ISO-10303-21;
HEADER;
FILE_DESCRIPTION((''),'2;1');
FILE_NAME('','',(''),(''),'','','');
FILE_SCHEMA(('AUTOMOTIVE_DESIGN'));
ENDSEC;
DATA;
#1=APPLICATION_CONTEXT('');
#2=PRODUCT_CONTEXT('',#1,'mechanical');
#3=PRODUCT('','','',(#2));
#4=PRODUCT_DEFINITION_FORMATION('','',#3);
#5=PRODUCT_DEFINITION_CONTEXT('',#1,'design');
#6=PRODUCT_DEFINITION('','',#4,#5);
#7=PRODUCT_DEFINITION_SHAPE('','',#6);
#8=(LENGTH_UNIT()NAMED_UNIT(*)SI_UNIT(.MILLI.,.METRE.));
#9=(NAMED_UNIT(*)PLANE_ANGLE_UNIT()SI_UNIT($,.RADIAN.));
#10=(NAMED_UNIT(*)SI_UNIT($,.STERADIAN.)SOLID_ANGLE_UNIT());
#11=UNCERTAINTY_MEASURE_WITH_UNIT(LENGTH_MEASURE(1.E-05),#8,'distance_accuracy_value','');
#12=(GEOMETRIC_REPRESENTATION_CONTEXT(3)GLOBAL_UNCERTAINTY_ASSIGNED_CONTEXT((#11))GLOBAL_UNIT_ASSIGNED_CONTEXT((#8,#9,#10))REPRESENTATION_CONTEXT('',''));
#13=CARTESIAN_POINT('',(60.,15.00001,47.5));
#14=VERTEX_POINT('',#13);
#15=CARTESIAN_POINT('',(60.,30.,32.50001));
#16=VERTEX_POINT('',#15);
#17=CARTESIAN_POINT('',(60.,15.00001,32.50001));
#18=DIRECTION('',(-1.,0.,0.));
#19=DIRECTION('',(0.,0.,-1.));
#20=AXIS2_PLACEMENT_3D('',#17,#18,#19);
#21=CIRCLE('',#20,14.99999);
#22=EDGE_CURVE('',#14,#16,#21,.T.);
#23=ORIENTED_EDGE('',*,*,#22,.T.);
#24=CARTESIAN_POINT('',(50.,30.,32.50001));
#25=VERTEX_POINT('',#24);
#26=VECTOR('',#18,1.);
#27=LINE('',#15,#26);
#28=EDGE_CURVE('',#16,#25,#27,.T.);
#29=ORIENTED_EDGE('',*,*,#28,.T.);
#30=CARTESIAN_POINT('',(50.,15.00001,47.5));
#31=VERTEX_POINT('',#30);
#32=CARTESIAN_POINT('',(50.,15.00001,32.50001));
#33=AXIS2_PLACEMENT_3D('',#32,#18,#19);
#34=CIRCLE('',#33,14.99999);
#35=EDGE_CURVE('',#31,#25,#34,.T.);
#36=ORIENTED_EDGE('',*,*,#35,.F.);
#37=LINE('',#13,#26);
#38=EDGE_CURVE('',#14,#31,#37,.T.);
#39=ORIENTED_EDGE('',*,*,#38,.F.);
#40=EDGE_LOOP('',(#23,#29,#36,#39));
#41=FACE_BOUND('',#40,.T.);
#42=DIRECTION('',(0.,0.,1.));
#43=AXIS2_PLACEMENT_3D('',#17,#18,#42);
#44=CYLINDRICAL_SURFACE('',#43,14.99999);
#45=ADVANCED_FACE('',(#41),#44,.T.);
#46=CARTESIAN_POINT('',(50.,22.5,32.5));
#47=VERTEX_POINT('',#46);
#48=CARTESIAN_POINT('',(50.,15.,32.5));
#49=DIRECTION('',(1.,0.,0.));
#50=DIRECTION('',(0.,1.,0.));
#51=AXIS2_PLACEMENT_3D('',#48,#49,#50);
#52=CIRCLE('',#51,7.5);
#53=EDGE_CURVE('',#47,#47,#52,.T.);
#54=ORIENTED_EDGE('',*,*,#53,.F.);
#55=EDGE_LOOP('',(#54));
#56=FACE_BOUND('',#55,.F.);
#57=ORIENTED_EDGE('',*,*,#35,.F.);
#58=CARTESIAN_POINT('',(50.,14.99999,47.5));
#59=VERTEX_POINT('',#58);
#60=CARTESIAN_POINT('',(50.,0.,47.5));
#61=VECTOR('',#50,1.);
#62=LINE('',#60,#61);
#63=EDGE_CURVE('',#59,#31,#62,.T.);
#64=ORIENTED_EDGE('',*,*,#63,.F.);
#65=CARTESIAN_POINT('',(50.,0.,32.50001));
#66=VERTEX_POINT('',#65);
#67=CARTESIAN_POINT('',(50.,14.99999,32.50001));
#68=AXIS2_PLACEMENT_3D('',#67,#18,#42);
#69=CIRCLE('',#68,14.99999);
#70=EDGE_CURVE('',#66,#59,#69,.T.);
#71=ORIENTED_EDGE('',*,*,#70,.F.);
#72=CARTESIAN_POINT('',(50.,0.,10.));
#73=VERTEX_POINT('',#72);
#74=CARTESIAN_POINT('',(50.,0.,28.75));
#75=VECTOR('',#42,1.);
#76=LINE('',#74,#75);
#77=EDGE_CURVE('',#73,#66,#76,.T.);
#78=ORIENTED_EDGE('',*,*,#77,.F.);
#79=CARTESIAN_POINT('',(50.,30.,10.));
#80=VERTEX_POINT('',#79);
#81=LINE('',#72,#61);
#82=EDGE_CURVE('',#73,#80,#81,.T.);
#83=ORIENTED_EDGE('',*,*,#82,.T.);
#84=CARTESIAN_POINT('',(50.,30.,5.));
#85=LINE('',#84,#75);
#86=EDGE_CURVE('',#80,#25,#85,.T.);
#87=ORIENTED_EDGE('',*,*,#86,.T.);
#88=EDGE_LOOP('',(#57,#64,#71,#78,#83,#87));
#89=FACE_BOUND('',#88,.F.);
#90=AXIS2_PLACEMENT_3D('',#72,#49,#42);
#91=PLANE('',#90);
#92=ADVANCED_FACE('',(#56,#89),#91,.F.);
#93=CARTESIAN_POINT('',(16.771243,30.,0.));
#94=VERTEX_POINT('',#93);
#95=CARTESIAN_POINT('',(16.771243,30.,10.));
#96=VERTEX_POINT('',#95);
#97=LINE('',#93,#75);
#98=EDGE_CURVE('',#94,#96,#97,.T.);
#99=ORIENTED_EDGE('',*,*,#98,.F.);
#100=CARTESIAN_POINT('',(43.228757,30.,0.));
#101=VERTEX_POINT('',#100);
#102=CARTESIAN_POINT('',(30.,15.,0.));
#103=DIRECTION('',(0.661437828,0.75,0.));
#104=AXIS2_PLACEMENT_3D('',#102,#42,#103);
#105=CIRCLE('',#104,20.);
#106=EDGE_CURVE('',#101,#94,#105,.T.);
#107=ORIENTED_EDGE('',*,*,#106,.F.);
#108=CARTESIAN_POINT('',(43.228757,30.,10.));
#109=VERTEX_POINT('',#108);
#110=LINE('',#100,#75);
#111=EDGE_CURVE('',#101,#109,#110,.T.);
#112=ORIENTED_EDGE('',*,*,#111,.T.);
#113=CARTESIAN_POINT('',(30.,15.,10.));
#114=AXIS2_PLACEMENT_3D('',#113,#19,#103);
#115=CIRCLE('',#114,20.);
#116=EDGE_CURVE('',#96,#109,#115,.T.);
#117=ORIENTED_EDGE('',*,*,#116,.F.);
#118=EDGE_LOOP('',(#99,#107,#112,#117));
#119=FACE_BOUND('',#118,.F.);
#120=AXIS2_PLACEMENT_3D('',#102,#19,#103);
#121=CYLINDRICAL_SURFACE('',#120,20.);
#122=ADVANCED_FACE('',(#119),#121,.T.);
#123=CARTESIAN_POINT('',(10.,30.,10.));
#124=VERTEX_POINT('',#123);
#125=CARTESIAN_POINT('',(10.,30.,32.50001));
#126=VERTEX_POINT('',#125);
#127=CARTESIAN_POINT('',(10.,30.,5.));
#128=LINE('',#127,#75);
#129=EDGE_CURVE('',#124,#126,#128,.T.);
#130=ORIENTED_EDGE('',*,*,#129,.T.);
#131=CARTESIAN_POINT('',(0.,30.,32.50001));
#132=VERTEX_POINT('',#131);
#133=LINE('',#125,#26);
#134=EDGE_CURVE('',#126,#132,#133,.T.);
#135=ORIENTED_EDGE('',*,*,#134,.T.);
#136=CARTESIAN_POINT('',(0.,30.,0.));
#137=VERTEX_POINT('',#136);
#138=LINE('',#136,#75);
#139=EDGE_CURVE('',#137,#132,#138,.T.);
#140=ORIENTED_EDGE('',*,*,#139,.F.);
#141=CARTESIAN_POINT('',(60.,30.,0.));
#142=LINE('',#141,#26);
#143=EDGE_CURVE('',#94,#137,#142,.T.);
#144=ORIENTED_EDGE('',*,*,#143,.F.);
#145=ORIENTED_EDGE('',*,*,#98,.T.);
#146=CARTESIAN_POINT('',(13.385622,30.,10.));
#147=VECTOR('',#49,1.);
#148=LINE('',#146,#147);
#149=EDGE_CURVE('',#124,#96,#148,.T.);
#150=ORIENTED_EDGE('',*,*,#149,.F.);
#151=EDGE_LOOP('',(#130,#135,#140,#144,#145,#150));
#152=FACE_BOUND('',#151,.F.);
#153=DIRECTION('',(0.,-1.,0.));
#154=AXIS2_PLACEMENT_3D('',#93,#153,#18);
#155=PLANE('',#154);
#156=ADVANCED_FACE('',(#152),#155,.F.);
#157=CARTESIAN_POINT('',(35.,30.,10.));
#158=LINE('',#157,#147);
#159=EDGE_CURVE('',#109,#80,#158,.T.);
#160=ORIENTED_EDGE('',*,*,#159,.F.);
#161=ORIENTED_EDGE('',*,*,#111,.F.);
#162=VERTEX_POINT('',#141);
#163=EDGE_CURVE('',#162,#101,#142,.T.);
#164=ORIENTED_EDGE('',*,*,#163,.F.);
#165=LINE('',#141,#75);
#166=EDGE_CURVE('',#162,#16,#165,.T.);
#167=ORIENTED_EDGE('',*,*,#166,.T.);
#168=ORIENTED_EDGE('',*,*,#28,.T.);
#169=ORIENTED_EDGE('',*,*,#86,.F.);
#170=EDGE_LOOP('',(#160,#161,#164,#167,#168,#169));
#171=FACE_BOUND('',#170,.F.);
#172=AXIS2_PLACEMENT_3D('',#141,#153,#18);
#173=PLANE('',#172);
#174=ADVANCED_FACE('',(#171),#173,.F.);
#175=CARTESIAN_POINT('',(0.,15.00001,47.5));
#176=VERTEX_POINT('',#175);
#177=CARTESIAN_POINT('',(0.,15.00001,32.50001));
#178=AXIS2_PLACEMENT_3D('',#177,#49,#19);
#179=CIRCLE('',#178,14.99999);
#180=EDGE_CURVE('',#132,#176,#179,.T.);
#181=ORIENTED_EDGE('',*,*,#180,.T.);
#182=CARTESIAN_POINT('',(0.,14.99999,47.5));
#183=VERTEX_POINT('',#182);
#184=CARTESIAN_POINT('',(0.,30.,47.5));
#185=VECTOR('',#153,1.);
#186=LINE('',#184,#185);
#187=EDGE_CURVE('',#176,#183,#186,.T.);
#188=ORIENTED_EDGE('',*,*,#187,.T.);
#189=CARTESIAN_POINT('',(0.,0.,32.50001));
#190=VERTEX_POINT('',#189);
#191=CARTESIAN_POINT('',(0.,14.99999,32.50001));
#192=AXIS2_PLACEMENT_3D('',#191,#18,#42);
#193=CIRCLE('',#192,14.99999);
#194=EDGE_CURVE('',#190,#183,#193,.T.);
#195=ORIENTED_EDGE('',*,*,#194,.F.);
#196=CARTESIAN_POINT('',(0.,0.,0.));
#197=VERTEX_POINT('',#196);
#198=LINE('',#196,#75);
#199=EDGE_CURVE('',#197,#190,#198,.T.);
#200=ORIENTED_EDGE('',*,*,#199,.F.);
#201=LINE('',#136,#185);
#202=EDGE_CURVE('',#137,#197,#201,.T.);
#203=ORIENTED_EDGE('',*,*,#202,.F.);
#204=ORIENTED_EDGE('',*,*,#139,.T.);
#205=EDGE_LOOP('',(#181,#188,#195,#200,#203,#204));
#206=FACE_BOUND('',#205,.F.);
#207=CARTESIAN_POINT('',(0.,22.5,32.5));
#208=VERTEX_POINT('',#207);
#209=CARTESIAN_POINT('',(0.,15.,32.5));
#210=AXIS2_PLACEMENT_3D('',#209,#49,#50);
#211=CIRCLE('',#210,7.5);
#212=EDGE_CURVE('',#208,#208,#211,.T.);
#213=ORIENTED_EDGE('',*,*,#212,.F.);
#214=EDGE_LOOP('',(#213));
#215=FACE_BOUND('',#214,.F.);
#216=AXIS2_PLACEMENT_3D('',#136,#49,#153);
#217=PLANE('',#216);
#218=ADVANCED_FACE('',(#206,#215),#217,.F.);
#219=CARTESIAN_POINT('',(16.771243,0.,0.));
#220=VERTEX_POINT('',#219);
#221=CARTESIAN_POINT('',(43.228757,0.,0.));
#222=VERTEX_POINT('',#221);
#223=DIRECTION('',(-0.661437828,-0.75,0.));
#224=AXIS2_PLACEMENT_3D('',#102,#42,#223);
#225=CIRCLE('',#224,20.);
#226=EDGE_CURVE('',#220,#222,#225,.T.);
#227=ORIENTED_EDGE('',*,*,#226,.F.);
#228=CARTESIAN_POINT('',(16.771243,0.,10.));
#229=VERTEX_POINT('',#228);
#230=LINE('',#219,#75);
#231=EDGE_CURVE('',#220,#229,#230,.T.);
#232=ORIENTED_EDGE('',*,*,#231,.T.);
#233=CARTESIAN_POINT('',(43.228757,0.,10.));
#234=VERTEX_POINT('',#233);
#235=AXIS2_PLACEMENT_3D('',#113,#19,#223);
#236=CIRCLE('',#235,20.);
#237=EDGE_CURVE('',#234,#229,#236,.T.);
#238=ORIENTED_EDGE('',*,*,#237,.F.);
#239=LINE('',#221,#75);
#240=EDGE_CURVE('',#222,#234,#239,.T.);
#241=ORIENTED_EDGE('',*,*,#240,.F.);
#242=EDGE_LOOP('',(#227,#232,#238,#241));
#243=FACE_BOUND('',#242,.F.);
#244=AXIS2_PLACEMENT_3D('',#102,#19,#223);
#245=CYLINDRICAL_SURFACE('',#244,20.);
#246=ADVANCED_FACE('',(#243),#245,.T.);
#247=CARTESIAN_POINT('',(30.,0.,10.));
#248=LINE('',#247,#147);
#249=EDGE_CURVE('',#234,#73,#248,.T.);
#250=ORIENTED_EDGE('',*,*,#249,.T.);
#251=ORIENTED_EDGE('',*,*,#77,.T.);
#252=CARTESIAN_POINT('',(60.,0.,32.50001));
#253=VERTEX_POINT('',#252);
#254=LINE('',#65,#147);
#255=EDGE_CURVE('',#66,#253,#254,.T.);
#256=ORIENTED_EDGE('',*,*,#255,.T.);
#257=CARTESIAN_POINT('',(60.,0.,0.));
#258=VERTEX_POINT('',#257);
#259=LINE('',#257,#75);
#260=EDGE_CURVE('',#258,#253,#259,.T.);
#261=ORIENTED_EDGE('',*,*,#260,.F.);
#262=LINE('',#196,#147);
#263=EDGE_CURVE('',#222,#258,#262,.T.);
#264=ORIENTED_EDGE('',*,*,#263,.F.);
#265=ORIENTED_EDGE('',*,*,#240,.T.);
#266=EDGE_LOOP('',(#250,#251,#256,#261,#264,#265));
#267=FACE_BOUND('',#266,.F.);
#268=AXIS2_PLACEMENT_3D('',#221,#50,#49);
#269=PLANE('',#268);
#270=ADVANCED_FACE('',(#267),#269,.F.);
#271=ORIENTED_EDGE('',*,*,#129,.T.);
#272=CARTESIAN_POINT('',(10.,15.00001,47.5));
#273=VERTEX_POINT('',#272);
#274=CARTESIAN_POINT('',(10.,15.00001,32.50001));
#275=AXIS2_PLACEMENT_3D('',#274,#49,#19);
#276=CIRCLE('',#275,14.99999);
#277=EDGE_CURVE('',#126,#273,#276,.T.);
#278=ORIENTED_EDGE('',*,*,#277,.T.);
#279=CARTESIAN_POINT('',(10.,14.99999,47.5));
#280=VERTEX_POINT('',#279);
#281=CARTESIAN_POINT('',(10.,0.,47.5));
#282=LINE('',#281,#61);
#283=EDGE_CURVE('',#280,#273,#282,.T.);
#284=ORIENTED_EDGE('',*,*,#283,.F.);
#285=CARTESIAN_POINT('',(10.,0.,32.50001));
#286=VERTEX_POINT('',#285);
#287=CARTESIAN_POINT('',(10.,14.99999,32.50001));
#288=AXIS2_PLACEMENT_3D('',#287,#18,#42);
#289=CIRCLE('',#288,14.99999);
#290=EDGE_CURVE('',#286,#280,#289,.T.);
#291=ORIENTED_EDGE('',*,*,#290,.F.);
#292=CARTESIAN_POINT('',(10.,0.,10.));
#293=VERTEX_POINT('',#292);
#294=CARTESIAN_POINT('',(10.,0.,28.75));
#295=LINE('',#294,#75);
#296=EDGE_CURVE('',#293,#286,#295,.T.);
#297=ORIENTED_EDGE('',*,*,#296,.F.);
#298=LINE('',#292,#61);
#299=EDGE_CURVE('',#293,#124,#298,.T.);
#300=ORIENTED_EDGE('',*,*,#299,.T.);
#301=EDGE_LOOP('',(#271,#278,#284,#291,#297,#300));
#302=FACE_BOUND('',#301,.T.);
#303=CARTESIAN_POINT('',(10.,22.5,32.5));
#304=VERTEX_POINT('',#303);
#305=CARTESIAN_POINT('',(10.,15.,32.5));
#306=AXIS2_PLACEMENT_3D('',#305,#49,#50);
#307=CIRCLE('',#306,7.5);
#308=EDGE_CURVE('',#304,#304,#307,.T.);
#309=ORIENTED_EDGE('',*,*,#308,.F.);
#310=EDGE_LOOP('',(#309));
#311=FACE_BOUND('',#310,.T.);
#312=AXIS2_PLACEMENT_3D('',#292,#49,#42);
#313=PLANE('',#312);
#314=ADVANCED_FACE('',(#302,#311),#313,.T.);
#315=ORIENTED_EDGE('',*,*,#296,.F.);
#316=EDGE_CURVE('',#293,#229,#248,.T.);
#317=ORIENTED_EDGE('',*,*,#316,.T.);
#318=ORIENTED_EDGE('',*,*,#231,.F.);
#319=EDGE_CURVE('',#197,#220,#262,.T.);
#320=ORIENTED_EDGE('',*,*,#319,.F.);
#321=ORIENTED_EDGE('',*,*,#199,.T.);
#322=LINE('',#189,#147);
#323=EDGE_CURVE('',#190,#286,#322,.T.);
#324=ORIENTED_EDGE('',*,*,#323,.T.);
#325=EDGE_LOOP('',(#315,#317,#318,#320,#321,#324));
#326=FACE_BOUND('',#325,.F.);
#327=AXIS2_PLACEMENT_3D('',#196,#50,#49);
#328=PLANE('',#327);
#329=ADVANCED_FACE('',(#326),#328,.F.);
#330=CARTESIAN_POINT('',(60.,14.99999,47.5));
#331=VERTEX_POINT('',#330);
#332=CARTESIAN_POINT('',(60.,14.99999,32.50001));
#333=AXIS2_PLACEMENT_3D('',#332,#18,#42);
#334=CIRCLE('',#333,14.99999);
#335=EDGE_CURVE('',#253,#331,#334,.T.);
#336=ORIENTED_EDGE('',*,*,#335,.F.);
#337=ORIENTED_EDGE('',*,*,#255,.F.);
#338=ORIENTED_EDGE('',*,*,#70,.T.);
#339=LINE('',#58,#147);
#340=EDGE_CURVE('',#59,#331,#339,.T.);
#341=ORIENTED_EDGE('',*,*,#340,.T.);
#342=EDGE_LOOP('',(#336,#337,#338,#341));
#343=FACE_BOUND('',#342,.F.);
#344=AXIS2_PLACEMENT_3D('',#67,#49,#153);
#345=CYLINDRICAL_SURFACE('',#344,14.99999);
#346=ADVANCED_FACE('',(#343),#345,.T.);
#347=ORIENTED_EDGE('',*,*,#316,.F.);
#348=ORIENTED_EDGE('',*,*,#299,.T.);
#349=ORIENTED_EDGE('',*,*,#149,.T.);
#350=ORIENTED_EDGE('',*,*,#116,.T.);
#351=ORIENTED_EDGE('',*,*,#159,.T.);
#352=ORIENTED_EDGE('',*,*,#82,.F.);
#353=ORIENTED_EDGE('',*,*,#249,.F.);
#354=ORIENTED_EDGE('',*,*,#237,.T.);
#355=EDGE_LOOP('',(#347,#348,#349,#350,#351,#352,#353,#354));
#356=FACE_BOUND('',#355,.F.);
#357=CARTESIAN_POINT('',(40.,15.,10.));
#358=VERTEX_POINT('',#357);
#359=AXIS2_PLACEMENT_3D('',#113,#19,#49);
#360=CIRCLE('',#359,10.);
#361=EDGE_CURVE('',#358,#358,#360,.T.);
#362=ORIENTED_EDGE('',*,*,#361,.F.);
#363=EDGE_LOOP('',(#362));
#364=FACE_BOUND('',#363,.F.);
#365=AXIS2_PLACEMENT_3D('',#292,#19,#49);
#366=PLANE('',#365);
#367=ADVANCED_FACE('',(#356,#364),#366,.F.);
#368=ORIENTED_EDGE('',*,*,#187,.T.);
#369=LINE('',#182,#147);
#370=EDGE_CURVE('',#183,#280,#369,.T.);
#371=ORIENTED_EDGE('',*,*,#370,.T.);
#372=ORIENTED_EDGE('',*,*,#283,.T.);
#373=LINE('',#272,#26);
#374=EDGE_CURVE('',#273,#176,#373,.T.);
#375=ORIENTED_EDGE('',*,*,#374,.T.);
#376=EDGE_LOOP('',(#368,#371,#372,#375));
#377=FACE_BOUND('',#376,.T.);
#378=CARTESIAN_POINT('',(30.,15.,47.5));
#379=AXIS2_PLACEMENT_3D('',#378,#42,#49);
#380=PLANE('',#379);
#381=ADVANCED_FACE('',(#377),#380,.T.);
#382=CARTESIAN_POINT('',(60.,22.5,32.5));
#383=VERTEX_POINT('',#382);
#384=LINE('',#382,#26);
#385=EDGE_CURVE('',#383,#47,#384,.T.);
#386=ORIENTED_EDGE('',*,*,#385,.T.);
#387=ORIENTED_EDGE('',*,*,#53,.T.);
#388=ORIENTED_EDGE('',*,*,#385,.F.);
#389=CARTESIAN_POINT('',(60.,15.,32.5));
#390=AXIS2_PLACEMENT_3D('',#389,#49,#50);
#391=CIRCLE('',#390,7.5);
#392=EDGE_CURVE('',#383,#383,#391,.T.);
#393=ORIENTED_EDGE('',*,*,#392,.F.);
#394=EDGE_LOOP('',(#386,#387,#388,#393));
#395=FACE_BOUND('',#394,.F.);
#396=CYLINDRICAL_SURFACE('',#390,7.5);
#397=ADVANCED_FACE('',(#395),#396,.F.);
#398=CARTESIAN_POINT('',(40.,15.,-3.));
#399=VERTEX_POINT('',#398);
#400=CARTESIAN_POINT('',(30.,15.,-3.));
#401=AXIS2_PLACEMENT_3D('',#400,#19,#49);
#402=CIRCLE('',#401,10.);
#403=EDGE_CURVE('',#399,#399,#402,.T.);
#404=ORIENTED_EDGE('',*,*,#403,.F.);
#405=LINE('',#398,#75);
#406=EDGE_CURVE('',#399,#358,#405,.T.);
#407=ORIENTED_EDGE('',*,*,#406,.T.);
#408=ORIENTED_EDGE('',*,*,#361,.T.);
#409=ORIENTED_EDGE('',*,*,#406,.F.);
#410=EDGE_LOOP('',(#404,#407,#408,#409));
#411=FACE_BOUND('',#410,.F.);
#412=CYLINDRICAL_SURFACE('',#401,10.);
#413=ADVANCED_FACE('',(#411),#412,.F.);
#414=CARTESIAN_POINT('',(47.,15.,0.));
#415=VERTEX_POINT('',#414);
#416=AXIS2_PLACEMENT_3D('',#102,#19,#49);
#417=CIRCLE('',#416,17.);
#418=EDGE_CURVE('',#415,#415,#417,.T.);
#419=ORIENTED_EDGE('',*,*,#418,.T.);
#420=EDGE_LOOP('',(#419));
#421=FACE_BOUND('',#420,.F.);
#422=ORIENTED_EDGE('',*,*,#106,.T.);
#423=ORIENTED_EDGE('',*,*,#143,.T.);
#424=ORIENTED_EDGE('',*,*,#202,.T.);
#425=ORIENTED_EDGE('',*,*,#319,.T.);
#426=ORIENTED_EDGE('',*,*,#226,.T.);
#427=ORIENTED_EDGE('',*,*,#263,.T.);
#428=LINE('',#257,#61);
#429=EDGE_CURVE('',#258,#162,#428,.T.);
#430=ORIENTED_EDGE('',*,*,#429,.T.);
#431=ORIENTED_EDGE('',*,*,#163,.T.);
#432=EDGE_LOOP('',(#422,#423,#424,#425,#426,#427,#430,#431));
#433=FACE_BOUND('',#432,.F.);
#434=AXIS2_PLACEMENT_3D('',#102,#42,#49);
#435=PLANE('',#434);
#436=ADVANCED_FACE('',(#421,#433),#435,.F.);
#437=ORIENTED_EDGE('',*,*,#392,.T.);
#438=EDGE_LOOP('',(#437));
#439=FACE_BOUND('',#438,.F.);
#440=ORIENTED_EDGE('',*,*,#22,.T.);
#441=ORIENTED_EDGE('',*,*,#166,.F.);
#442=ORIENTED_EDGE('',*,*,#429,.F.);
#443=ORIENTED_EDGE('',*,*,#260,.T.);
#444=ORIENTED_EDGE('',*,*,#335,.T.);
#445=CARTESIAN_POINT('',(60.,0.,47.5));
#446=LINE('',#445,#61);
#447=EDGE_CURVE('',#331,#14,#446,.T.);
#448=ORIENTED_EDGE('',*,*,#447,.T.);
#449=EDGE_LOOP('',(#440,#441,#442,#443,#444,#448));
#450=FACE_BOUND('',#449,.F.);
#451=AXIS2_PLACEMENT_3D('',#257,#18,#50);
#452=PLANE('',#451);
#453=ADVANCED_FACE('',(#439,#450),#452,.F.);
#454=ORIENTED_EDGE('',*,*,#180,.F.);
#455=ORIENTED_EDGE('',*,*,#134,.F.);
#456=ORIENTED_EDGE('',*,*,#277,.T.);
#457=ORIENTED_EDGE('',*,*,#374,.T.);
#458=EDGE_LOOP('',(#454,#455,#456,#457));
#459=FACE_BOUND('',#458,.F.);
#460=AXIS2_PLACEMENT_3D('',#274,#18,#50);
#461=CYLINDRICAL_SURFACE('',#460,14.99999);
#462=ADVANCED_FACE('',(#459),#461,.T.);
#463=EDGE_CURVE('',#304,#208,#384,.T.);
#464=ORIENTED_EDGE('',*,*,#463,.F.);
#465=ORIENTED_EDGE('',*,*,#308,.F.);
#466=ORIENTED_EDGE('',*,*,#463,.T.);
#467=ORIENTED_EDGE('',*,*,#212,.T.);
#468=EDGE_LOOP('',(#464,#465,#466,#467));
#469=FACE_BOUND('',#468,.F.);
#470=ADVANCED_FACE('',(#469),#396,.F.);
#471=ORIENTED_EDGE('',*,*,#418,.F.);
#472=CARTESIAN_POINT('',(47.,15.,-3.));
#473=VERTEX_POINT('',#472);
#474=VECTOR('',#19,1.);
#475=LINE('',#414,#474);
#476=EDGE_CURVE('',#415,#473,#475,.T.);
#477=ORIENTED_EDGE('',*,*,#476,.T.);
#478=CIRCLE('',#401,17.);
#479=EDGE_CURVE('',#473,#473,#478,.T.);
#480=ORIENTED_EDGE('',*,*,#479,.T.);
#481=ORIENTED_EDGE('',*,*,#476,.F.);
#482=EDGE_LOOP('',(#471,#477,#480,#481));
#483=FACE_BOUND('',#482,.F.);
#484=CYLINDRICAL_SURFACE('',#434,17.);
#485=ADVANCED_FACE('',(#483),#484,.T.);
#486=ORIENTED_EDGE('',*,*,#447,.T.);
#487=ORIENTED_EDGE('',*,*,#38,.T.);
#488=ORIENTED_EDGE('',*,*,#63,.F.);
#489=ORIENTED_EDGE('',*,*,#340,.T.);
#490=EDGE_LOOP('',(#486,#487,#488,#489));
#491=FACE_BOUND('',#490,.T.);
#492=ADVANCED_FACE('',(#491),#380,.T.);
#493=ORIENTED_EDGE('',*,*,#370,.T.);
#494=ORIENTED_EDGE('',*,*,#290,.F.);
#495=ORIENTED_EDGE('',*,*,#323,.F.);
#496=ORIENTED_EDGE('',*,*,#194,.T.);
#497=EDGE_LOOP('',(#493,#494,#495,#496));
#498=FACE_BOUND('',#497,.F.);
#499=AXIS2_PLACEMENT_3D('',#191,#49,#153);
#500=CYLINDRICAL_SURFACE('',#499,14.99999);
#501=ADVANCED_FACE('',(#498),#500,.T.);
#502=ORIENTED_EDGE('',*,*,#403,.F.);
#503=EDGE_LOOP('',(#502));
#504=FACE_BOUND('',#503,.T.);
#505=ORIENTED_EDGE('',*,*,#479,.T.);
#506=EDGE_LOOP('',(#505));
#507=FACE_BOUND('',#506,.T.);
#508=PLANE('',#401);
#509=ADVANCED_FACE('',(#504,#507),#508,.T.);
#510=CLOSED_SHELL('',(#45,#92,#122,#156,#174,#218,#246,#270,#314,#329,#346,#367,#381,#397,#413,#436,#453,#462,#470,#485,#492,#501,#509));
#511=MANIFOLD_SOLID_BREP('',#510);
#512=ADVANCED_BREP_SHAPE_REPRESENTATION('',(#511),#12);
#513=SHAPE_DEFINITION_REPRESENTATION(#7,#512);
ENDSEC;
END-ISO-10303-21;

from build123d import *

# Parameters (mm, degrees)
F1_DEPTH  = 47.5
F2_W      = 40
F2_H      = 37.5
F3_DEPTH  = 205
F4_W      = 26.4575131106
F4_H      = 37.5
F5_DEPTH  = 25
F6_R      = 17
F7_DEPTH  = 3
F8_R      = 10
F9_DEPTH  = 25
F11_DEPTH = 125
F12_R     = 14.99999


# Not quite as in the source:
# - a fillet or chamfer is up to 0.001 mm smaller than in the source, because OpenCascade refuses the exact size


with BuildPart() as f1:
    # F0 (on Top) → F1 (new body)
    with BuildSketch(Plane.XY):
        Polygon((0, 15), (0, 0), (16.7712434447, 0), (43.2287565553, 0), (60, 0), (60, 15), (60, 30), (43.2287565553, 30), (16.7712434447, 30), (0, 30), align=None)
        with BuildLine():
            Line((49.2664991614, 20.3667504193), (60, 15))
            Line((60, 15), (50, 15))
            ThreePointArc((50, 15), (49.8157763314, 17.7083220609), (49.2664991614, 20.3667504193))
        make_face(mode=Mode.SUBTRACT)
        with BuildLine():
            Line((43.2287565553, 0), (16.7712434447, 0))
            ThreePointArc((16.7712434447, 0), (30, -5), (43.2287565553, 0))
        make_face()
        with BuildLine():
            ThreePointArc((43.2287565553, 30), (30, 35), (16.7712434447, 30))
            Line((16.7712434447, 30), (43.2287565553, 30))
        make_face()
        with BuildLine():
            Line((50, 15), (60, 15))
            Line((60, 15), (49.2664991614, 20.3667504193))
            ThreePointArc((49.2664991614, 20.3667504193), (49.8157763314, 17.7083220609), (50, 15))
        make_face()
    extrude(amount=F1_DEPTH)

    # F2 (on face) → F3 (cut)
    with BuildSketch(Plane.XZ):
        with Locations((30, 28.75)):
            Rectangle(F2_W, F2_H)
    extrude(amount=-F3_DEPTH, mode=Mode.SUBTRACT)

    # F4 (on face) → F5 (cut)
    with BuildSketch(Plane(origin=(0, 0, 0), x_dir=(-1, 0, 0), z_dir=(0, 1, 0))):
        with Locations((-30, 28.75)):
            Rectangle(F4_W, F4_H)
    extrude(amount=-F5_DEPTH, mode=Mode.SUBTRACT)

    # F6 (on face) → F7 (join)
    with BuildSketch(Plane(origin=(0, 0, 0), x_dir=(1, 0, 0), z_dir=(0, 0, -1))):
        with Locations((30, -15)):
            Circle(F6_R)
    extrude(amount=F7_DEPTH)

    # F8 (on face) → F9 (cut)
    with BuildSketch(Plane(origin=(0, 0, -3), x_dir=(1, 0, 0), z_dir=(0, 0, -1))):
        with Locations((30, -15)):
            Circle(F8_R)
    extrude(amount=-F9_DEPTH, mode=Mode.SUBTRACT)

    # F10 (on face) → F11 (cut)
    with BuildSketch(Plane.YZ.offset(60)):
        with BuildLine():
            ThreePointArc((15, 25), (20.3033008589, 27.1966991411), (22.5, 32.5))
            ThreePointArc((22.5, 32.5), (9.6966991411, 37.8033008589), (15, 25))
        make_face()
    extrude(amount=-F11_DEPTH, mode=Mode.SUBTRACT)

    # F12 (radius 15 in the source; OpenCascade refuses exactly that, so slightly less here)
    f12_edges = [f1.edges().sort_by_distance(p)[0] for p in [
        (55, 0, 47.5),
        (55, 30, 47.5),
        (5, 0, 47.5),
        (5, 30, 47.5),
    ]]
    fillet(f12_edges, radius=F12_R)


solid = f1.part
